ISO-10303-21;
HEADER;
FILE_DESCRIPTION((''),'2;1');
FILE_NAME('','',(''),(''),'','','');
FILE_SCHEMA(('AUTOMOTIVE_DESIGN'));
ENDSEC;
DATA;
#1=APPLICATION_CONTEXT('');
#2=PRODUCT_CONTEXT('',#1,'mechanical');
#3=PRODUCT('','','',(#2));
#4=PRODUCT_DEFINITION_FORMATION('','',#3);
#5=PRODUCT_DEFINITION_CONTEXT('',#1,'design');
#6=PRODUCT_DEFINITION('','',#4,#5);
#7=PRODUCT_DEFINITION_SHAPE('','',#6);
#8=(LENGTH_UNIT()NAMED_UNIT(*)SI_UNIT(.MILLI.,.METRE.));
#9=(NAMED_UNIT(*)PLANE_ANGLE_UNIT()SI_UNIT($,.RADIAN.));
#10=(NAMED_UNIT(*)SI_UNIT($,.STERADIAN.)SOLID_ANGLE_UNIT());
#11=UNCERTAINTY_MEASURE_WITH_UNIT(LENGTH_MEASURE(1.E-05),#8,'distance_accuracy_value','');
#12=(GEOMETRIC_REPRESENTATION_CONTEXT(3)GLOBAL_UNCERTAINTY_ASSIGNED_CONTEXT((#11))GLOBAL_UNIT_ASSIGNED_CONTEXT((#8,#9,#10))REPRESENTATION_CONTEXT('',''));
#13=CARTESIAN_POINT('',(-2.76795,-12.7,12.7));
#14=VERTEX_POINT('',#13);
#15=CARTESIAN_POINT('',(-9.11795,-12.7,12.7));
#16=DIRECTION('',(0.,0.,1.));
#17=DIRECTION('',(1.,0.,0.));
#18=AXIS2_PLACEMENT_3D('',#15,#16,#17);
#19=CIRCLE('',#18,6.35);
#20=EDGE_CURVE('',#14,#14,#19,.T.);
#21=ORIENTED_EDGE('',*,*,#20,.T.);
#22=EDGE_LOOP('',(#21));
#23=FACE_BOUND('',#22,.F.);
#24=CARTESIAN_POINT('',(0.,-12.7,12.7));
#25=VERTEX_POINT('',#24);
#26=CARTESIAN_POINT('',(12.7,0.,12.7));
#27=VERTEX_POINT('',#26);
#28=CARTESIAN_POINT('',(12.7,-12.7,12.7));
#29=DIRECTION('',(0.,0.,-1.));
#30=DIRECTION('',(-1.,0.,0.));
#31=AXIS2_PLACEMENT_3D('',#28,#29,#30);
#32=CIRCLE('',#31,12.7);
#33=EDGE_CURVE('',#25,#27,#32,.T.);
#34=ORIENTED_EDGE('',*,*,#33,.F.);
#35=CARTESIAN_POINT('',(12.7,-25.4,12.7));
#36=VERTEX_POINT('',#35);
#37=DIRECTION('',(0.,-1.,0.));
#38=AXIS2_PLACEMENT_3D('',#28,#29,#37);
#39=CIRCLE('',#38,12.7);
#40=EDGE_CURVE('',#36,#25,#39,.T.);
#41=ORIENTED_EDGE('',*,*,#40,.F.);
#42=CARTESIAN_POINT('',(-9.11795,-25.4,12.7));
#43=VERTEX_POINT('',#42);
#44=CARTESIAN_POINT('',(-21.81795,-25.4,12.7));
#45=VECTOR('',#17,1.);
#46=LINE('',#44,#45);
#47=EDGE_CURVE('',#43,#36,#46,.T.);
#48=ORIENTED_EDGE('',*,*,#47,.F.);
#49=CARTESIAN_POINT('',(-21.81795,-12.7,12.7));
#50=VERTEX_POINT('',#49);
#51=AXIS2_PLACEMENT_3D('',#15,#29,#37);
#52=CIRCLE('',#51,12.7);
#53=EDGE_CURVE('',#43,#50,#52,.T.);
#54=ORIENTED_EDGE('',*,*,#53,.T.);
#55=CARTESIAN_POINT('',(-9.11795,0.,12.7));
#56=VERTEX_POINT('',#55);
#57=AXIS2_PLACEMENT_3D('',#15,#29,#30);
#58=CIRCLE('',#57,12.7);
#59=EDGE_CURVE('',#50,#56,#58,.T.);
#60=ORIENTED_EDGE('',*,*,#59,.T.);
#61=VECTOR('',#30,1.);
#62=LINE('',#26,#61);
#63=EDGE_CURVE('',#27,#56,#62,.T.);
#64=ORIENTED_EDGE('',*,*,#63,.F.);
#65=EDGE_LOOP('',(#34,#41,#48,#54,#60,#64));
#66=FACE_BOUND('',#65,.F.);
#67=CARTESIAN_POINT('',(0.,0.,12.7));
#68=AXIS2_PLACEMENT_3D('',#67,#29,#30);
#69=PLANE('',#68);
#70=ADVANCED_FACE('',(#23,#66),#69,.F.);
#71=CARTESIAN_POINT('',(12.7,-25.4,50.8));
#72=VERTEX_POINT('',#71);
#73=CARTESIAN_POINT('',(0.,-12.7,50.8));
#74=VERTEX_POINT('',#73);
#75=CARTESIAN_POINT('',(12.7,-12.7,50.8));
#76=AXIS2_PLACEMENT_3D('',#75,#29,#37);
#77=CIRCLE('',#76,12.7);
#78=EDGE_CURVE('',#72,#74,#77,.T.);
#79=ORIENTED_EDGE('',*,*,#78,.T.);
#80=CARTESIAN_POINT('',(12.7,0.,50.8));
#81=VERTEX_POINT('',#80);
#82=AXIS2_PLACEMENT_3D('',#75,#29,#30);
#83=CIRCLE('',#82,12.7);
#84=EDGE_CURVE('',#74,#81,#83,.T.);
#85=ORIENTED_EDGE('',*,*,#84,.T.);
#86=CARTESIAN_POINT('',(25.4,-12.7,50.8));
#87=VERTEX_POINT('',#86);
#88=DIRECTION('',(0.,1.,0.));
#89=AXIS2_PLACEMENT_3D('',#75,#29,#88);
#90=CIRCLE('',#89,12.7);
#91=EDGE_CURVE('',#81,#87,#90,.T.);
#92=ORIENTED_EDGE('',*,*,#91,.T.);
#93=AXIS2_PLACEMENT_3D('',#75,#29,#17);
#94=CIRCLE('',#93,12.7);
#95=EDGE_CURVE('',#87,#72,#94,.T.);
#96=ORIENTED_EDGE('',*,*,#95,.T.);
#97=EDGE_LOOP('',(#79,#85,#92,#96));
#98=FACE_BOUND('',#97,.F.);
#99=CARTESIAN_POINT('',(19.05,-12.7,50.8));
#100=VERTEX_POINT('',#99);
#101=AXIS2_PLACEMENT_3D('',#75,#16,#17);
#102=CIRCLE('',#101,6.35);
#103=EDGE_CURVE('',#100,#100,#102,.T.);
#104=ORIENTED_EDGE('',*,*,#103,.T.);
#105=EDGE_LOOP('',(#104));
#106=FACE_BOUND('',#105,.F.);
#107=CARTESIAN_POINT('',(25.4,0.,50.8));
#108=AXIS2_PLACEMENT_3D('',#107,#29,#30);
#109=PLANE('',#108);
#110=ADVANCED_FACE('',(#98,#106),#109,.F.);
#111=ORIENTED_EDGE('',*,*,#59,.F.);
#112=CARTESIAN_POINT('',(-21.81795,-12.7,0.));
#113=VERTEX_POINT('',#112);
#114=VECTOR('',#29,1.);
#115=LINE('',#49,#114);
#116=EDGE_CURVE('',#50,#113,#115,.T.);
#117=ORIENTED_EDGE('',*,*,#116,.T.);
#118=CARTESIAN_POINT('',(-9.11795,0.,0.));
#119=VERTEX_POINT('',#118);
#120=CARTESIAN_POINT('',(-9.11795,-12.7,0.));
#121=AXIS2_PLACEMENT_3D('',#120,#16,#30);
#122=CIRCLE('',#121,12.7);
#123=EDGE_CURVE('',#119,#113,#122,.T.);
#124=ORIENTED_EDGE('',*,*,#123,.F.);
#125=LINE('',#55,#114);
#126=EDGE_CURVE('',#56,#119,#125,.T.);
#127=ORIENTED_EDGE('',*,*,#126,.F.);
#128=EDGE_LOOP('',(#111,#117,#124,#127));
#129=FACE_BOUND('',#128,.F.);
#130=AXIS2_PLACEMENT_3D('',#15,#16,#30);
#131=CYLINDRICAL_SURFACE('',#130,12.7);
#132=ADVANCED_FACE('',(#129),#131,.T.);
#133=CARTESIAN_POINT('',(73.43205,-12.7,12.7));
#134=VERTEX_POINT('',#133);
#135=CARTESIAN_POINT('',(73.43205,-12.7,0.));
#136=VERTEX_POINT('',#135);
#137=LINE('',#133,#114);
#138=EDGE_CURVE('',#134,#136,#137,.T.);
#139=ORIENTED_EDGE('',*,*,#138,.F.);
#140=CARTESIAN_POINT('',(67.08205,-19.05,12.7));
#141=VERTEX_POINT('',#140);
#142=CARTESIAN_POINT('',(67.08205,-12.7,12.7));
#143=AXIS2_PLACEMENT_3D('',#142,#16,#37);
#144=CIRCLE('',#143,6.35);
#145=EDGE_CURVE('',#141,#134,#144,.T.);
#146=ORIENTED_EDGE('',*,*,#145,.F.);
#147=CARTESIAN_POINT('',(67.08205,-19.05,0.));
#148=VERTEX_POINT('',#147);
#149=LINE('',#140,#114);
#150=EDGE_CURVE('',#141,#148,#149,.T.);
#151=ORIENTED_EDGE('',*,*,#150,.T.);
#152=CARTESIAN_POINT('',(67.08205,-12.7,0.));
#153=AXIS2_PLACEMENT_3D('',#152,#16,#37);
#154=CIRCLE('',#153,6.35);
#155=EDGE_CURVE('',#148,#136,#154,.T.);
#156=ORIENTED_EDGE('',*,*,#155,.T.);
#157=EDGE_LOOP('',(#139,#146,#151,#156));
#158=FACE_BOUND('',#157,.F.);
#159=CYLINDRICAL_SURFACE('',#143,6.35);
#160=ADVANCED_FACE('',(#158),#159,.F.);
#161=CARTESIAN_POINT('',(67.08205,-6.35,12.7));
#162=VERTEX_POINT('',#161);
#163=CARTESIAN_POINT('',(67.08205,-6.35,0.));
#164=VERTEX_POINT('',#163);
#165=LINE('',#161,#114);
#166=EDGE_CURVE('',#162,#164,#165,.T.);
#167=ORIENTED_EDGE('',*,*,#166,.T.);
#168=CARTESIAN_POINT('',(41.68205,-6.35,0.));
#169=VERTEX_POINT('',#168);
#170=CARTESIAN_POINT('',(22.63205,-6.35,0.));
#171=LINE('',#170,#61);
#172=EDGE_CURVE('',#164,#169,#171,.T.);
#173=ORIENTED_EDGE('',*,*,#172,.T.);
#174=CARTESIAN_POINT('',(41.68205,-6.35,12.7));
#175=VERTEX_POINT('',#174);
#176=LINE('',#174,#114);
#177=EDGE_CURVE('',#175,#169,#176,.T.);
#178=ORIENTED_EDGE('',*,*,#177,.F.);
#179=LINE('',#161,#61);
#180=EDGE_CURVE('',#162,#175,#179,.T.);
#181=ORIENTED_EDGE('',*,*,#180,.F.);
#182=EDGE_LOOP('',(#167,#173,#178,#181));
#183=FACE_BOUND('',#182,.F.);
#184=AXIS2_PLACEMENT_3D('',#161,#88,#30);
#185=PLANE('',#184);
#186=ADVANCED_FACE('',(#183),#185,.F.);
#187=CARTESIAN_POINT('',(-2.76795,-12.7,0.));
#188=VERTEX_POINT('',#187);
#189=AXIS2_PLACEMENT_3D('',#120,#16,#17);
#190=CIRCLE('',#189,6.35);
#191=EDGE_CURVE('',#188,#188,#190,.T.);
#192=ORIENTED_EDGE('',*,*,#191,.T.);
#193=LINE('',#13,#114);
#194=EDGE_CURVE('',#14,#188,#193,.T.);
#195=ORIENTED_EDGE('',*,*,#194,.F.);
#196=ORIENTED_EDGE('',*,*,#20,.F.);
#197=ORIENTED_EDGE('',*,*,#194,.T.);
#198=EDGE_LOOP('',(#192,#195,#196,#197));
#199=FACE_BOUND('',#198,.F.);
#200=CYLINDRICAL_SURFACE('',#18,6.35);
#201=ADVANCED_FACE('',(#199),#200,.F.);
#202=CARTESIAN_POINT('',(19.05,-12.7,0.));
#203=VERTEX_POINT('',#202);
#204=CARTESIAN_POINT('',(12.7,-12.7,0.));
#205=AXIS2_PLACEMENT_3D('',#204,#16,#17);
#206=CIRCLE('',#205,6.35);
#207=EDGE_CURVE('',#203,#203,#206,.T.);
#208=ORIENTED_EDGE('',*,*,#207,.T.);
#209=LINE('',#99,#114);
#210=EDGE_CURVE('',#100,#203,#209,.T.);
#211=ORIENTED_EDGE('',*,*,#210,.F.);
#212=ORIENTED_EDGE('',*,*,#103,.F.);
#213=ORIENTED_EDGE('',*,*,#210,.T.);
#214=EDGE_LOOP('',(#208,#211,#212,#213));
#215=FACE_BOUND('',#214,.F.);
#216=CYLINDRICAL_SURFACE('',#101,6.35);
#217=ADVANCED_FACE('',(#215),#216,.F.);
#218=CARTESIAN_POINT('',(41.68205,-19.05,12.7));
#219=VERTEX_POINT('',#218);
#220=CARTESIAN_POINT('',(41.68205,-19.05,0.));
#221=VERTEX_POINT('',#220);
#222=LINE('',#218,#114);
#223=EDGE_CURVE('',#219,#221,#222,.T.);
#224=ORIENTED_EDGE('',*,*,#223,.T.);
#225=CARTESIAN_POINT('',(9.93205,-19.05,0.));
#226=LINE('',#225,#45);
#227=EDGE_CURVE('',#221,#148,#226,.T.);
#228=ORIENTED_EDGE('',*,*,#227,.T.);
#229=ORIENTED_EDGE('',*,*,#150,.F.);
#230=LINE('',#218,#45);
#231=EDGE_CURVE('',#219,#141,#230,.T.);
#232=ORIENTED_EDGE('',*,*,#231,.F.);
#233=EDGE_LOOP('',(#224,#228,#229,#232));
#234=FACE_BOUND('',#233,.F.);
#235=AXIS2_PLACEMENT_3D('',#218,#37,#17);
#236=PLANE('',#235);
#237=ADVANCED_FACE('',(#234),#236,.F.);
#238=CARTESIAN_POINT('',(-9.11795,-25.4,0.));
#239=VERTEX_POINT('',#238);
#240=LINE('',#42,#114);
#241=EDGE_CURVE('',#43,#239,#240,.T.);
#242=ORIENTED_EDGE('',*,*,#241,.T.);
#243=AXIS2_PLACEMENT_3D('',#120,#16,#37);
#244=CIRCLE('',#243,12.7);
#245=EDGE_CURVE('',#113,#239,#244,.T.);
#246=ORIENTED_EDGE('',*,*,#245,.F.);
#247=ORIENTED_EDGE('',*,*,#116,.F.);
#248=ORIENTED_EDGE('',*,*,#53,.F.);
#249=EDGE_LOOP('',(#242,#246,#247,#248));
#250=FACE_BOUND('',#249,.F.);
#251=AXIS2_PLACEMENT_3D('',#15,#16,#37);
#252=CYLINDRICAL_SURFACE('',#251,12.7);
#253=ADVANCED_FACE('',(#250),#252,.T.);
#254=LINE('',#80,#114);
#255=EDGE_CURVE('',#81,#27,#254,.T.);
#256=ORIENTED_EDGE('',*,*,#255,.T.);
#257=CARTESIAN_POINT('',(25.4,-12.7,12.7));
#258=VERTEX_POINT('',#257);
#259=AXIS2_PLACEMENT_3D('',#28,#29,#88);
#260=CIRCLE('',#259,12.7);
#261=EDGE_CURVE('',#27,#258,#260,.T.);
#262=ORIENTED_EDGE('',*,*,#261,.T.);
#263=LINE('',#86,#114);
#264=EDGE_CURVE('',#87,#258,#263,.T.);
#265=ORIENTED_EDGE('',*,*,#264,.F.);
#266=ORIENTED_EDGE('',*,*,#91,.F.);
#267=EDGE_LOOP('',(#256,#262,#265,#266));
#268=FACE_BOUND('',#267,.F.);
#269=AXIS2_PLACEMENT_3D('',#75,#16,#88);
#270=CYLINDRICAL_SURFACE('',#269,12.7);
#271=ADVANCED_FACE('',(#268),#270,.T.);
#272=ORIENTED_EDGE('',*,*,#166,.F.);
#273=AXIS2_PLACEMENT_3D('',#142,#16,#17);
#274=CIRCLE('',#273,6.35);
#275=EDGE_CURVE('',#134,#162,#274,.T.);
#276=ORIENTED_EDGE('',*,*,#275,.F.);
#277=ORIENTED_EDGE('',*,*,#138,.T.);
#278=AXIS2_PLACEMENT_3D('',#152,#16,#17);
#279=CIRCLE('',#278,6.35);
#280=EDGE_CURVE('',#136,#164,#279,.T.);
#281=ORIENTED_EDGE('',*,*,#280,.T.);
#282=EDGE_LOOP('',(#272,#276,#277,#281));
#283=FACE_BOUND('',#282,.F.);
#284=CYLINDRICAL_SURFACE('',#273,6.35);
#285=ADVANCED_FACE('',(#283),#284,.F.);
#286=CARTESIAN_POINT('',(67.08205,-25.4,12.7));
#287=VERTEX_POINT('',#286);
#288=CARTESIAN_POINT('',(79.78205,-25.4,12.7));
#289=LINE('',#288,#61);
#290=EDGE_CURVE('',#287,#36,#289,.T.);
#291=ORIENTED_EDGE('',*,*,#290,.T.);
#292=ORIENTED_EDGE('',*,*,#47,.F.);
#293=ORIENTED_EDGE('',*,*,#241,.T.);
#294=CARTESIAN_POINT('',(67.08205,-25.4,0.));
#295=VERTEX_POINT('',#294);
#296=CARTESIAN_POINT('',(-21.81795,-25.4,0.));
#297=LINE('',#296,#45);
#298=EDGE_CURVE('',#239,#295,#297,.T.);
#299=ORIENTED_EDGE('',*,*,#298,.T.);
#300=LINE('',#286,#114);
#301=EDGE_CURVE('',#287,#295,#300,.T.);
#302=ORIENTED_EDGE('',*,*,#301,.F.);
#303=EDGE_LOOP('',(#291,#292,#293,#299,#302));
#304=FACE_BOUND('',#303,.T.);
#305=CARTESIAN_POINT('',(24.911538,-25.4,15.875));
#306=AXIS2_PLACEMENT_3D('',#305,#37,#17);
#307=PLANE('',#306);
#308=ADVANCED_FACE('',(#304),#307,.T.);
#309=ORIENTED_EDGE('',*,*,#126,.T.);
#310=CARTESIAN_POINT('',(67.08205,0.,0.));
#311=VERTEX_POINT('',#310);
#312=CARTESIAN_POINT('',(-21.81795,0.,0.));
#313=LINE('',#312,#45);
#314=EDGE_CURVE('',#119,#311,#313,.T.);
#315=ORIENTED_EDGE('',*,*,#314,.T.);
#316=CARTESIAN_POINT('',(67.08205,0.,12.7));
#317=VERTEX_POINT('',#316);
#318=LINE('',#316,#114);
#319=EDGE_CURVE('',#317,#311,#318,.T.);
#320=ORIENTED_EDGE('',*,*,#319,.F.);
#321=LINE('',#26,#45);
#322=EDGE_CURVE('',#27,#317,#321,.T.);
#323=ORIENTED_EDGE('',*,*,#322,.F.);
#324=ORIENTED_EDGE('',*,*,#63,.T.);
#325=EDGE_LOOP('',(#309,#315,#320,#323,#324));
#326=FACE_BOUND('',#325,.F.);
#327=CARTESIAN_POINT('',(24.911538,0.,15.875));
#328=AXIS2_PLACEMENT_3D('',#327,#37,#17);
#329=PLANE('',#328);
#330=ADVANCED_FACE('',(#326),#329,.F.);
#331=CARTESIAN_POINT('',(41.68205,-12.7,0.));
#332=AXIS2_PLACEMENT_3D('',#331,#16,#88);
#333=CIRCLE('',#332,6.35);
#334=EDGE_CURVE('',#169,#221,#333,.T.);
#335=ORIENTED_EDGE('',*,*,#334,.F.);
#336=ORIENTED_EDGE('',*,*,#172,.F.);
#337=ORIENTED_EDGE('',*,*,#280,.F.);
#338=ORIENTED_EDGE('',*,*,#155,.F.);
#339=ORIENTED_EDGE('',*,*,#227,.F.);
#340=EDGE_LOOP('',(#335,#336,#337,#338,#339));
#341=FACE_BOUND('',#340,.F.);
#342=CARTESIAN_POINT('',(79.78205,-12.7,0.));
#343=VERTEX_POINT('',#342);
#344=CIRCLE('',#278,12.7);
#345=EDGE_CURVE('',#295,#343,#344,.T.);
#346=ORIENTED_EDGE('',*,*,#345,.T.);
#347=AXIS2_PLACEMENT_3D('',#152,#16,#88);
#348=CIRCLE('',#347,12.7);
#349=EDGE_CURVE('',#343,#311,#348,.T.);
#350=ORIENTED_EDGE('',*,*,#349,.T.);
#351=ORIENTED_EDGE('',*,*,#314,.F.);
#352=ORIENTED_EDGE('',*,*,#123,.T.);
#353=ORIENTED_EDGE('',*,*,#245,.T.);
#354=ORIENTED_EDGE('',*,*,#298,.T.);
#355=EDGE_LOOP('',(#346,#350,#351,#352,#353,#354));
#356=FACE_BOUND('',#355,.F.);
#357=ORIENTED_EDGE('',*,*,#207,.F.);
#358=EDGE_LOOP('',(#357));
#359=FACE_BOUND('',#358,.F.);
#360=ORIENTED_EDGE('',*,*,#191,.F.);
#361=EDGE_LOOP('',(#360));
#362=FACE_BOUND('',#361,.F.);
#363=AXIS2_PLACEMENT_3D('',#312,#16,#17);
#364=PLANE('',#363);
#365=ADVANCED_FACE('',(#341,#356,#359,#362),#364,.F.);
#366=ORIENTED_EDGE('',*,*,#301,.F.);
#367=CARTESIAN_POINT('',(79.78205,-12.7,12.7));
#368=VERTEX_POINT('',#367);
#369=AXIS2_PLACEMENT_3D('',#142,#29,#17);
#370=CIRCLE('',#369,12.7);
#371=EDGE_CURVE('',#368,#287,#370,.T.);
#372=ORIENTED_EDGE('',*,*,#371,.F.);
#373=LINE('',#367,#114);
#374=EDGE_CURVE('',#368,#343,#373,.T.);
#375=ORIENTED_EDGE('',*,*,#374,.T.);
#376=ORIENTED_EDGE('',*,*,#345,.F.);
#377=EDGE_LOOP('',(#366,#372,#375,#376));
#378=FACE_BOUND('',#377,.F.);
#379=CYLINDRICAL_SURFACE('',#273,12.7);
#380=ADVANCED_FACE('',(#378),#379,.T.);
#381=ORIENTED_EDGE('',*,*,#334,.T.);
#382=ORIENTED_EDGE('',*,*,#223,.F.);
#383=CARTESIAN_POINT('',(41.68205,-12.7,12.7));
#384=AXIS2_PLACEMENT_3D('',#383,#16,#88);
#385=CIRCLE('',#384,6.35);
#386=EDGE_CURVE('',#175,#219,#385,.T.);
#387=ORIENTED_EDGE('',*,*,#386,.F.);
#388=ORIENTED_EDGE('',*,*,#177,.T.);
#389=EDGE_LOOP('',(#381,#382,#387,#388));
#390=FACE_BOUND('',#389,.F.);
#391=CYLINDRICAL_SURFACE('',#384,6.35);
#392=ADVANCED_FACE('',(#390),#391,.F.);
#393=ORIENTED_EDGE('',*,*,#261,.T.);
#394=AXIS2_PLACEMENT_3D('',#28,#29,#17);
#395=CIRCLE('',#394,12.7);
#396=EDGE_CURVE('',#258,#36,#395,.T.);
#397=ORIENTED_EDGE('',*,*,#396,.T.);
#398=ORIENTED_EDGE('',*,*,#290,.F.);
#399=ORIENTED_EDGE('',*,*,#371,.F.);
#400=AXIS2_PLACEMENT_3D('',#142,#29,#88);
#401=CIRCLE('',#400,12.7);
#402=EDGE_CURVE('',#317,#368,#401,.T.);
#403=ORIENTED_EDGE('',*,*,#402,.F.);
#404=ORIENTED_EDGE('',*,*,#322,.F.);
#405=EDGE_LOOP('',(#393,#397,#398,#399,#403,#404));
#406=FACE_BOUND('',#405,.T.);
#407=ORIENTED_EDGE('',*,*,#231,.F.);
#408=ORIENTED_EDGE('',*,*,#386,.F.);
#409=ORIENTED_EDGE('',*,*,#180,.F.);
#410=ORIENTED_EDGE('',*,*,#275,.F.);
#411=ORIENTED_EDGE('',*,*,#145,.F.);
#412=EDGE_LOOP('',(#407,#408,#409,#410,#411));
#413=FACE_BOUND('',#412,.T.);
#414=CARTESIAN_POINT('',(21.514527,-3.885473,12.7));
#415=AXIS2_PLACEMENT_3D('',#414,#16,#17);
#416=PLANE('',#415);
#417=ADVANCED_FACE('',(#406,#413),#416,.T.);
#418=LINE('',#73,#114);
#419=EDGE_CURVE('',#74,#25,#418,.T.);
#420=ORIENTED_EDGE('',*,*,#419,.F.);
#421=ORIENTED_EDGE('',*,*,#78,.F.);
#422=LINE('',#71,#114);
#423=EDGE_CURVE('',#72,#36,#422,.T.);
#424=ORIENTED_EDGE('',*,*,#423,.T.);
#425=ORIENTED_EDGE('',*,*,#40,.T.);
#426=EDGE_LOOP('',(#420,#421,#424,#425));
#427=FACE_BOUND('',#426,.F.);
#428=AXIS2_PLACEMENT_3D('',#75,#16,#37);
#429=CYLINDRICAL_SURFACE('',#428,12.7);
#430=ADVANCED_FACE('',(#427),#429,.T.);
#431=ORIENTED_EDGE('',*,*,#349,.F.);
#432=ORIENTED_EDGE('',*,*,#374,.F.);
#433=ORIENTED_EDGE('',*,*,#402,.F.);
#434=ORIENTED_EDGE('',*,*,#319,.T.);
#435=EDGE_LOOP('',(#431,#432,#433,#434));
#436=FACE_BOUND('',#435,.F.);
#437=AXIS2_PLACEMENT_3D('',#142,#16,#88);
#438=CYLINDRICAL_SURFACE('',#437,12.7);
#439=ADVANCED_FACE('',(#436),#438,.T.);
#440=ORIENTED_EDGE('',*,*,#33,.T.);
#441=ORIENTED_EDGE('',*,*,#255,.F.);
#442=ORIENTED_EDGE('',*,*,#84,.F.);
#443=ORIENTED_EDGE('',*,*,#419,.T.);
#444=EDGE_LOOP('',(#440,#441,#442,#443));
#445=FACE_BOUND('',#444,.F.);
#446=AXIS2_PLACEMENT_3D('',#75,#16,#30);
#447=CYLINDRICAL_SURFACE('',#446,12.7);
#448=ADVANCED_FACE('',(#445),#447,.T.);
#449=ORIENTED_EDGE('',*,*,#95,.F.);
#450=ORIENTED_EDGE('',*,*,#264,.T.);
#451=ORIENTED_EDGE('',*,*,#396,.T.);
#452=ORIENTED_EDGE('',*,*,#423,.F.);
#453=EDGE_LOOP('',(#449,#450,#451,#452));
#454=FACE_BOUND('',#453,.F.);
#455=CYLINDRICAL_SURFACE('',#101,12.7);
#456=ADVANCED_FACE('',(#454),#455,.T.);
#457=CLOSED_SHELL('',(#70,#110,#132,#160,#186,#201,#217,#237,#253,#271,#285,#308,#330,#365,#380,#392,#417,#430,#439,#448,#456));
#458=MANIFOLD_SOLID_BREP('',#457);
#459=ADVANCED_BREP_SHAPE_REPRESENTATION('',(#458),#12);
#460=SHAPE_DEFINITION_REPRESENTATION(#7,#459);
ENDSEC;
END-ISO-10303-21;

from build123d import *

# Parameters (mm, degrees)
F1_DEPTH = 25.4
F3_DEPTH = 38.1
F4_R     = 6.35
F5_DEPTH = 25.4
F7_DEPTH = 25.4
F8_R     = 6.35
F9_DEPTH = 127


# Not quite as in the source:
# - a feature names something its author has since deleted; it is built from what else it names


with BuildPart() as f1:
    # F0 (on Front) → F1 (new body)
    with BuildSketch(Plane.XZ):
        Polygon((-21.8179498348, 12.7), (-21.8179498348, 0), (79.7820501652, 0), (79.7820501652, 12.7), (25.4, 12.7), (25.4, 50.8), (0, 50.8), (0, 12.7), align=None)
    extrude(amount=F1_DEPTH)

    # F2 (on face) → F3 (cut)
    with BuildSketch(Plane.XY.offset(50.8)):
        with BuildLine():
            ThreePointArc((12.7, 0), (21.6802561211, -3.7197438789), (25.4, -12.7))
            Line((25.4, -12.7), (25.4, 0))
            Line((25.4, 0), (12.7, 0))
        make_face()
        with BuildLine():
            ThreePointArc((0, -12.7), (3.7197438789, -3.7197438789), (12.7, 0))
            Line((12.7, 0), (0, 0))
            Line((0, 0), (0, -12.7))
        make_face()
        with BuildLine():
            Line((0, -25.4), (12.7, -25.4))
            ThreePointArc((12.7, -25.4), (3.7197438789, -21.6802561211), (0, -12.7))
            Line((0, -12.7), (0, -25.4))
        make_face()
        with BuildLine():
            Line((25.4, -25.4), (25.4, -12.7))
            ThreePointArc((25.4, -12.7), (21.6802561211, -21.6802561211), (12.7, -25.4))
            Line((12.7, -25.4), (25.4, -25.4))
        make_face()
    extrude(amount=-F3_DEPTH, mode=Mode.SUBTRACT)

    # F4 (on face) → F5 (cut)
    with BuildSketch(Plane.XY.offset(12.7)):
        with Locations((-9.1179498348, -12.7)):
            Circle(F4_R)
        with BuildLine():
            ThreePointArc((-21.8179498348, -12.7), (-18.0982059559, -3.7197438789), (-9.1179498348, 0))
            Line((-9.1179498348, 0), (-21.8179498348, 0))
            Line((-21.8179498348, 0), (-21.8179498348, -12.7))
        make_face()
        with BuildLine():
            ThreePointArc((-9.1179498348, -25.4), (-18.0982059559, -21.6802561211), (-21.8179498348, -12.7))
            Line((-21.8179498348, -12.7), (-21.8179498348, -25.4))
            Line((-21.8179498348, -25.4), (-9.1179498348, -25.4))
        make_face()
    extrude(amount=-F5_DEPTH, mode=Mode.SUBTRACT)

    # F6 (on face) → F7 (cut)
    with BuildSketch(Plane.XY.offset(12.7)):
        with BuildLine():
            ThreePointArc((67.0820501652, 0), (76.0623062862, -3.7197438789), (79.7820501652, -12.7))
            Line((79.7820501652, -12.7), (79.7820501652, 0))
            Line((79.7820501652, 0), (67.0820501652, 0))
        make_face()
        with BuildLine():
            ThreePointArc((79.7820501652, -12.7), (76.0623062862, -21.6802561211), (67.0820501652, -25.4))
            Line((67.0820501652, -25.4), (79.7820501652, -25.4))
            Line((79.7820501652, -25.4), (79.7820501652, -12.7))
        make_face()
        with BuildLine():
            ThreePointArc((67.0820501652, -19.05), (71.5721782257, -17.1901280605), (73.4320501652, -12.7))
            ThreePointArc((73.4320501652, -12.7), (71.5721782257, -8.2098719395), (67.0820501652, -6.35))
            ThreePointArc((67.0820501652, -6.35), (60.7320501652, -12.7), (67.0820501652, -19.05))
        make_face()
        with BuildLine():
            ThreePointArc((67.0820501652, -19.05), (60.7320501652, -12.7), (67.0820501652, -6.35))
            Line((67.0820501652, -6.35), (41.6820501652, -6.35))
            ThreePointArc((41.6820501652, -6.35), (46.1721782257, -8.2098719395), (48.0320501652, -12.7))
            ThreePointArc((48.0320501652, -12.7), (46.1721782257, -17.1901280605), (41.6820501652, -19.05))
            Line((41.6820501652, -19.05), (67.0820501652, -19.05))
        make_face()
        with BuildLine():
            ThreePointArc((48.0320501652, -12.7), (46.1721782257, -8.2098719395), (41.6820501652, -6.35))
            ThreePointArc((41.6820501652, -6.35), (35.3320501652, -12.7), (41.6820501652, -19.05))
            ThreePointArc((41.6820501652, -19.05), (46.1721782257, -17.1901280605), (48.0320501652, -12.7))
        make_face()
    extrude(amount=-F7_DEPTH, mode=Mode.SUBTRACT)

    # F8 (on face) → F9 (cut)
    with BuildSketch(Plane.XY.offset(50.8)):
        with Locations((12.7, -12.7)):
            Circle(F8_R)
    extrude(amount=-F9_DEPTH, mode=Mode.SUBTRACT)


solid = f1.part
